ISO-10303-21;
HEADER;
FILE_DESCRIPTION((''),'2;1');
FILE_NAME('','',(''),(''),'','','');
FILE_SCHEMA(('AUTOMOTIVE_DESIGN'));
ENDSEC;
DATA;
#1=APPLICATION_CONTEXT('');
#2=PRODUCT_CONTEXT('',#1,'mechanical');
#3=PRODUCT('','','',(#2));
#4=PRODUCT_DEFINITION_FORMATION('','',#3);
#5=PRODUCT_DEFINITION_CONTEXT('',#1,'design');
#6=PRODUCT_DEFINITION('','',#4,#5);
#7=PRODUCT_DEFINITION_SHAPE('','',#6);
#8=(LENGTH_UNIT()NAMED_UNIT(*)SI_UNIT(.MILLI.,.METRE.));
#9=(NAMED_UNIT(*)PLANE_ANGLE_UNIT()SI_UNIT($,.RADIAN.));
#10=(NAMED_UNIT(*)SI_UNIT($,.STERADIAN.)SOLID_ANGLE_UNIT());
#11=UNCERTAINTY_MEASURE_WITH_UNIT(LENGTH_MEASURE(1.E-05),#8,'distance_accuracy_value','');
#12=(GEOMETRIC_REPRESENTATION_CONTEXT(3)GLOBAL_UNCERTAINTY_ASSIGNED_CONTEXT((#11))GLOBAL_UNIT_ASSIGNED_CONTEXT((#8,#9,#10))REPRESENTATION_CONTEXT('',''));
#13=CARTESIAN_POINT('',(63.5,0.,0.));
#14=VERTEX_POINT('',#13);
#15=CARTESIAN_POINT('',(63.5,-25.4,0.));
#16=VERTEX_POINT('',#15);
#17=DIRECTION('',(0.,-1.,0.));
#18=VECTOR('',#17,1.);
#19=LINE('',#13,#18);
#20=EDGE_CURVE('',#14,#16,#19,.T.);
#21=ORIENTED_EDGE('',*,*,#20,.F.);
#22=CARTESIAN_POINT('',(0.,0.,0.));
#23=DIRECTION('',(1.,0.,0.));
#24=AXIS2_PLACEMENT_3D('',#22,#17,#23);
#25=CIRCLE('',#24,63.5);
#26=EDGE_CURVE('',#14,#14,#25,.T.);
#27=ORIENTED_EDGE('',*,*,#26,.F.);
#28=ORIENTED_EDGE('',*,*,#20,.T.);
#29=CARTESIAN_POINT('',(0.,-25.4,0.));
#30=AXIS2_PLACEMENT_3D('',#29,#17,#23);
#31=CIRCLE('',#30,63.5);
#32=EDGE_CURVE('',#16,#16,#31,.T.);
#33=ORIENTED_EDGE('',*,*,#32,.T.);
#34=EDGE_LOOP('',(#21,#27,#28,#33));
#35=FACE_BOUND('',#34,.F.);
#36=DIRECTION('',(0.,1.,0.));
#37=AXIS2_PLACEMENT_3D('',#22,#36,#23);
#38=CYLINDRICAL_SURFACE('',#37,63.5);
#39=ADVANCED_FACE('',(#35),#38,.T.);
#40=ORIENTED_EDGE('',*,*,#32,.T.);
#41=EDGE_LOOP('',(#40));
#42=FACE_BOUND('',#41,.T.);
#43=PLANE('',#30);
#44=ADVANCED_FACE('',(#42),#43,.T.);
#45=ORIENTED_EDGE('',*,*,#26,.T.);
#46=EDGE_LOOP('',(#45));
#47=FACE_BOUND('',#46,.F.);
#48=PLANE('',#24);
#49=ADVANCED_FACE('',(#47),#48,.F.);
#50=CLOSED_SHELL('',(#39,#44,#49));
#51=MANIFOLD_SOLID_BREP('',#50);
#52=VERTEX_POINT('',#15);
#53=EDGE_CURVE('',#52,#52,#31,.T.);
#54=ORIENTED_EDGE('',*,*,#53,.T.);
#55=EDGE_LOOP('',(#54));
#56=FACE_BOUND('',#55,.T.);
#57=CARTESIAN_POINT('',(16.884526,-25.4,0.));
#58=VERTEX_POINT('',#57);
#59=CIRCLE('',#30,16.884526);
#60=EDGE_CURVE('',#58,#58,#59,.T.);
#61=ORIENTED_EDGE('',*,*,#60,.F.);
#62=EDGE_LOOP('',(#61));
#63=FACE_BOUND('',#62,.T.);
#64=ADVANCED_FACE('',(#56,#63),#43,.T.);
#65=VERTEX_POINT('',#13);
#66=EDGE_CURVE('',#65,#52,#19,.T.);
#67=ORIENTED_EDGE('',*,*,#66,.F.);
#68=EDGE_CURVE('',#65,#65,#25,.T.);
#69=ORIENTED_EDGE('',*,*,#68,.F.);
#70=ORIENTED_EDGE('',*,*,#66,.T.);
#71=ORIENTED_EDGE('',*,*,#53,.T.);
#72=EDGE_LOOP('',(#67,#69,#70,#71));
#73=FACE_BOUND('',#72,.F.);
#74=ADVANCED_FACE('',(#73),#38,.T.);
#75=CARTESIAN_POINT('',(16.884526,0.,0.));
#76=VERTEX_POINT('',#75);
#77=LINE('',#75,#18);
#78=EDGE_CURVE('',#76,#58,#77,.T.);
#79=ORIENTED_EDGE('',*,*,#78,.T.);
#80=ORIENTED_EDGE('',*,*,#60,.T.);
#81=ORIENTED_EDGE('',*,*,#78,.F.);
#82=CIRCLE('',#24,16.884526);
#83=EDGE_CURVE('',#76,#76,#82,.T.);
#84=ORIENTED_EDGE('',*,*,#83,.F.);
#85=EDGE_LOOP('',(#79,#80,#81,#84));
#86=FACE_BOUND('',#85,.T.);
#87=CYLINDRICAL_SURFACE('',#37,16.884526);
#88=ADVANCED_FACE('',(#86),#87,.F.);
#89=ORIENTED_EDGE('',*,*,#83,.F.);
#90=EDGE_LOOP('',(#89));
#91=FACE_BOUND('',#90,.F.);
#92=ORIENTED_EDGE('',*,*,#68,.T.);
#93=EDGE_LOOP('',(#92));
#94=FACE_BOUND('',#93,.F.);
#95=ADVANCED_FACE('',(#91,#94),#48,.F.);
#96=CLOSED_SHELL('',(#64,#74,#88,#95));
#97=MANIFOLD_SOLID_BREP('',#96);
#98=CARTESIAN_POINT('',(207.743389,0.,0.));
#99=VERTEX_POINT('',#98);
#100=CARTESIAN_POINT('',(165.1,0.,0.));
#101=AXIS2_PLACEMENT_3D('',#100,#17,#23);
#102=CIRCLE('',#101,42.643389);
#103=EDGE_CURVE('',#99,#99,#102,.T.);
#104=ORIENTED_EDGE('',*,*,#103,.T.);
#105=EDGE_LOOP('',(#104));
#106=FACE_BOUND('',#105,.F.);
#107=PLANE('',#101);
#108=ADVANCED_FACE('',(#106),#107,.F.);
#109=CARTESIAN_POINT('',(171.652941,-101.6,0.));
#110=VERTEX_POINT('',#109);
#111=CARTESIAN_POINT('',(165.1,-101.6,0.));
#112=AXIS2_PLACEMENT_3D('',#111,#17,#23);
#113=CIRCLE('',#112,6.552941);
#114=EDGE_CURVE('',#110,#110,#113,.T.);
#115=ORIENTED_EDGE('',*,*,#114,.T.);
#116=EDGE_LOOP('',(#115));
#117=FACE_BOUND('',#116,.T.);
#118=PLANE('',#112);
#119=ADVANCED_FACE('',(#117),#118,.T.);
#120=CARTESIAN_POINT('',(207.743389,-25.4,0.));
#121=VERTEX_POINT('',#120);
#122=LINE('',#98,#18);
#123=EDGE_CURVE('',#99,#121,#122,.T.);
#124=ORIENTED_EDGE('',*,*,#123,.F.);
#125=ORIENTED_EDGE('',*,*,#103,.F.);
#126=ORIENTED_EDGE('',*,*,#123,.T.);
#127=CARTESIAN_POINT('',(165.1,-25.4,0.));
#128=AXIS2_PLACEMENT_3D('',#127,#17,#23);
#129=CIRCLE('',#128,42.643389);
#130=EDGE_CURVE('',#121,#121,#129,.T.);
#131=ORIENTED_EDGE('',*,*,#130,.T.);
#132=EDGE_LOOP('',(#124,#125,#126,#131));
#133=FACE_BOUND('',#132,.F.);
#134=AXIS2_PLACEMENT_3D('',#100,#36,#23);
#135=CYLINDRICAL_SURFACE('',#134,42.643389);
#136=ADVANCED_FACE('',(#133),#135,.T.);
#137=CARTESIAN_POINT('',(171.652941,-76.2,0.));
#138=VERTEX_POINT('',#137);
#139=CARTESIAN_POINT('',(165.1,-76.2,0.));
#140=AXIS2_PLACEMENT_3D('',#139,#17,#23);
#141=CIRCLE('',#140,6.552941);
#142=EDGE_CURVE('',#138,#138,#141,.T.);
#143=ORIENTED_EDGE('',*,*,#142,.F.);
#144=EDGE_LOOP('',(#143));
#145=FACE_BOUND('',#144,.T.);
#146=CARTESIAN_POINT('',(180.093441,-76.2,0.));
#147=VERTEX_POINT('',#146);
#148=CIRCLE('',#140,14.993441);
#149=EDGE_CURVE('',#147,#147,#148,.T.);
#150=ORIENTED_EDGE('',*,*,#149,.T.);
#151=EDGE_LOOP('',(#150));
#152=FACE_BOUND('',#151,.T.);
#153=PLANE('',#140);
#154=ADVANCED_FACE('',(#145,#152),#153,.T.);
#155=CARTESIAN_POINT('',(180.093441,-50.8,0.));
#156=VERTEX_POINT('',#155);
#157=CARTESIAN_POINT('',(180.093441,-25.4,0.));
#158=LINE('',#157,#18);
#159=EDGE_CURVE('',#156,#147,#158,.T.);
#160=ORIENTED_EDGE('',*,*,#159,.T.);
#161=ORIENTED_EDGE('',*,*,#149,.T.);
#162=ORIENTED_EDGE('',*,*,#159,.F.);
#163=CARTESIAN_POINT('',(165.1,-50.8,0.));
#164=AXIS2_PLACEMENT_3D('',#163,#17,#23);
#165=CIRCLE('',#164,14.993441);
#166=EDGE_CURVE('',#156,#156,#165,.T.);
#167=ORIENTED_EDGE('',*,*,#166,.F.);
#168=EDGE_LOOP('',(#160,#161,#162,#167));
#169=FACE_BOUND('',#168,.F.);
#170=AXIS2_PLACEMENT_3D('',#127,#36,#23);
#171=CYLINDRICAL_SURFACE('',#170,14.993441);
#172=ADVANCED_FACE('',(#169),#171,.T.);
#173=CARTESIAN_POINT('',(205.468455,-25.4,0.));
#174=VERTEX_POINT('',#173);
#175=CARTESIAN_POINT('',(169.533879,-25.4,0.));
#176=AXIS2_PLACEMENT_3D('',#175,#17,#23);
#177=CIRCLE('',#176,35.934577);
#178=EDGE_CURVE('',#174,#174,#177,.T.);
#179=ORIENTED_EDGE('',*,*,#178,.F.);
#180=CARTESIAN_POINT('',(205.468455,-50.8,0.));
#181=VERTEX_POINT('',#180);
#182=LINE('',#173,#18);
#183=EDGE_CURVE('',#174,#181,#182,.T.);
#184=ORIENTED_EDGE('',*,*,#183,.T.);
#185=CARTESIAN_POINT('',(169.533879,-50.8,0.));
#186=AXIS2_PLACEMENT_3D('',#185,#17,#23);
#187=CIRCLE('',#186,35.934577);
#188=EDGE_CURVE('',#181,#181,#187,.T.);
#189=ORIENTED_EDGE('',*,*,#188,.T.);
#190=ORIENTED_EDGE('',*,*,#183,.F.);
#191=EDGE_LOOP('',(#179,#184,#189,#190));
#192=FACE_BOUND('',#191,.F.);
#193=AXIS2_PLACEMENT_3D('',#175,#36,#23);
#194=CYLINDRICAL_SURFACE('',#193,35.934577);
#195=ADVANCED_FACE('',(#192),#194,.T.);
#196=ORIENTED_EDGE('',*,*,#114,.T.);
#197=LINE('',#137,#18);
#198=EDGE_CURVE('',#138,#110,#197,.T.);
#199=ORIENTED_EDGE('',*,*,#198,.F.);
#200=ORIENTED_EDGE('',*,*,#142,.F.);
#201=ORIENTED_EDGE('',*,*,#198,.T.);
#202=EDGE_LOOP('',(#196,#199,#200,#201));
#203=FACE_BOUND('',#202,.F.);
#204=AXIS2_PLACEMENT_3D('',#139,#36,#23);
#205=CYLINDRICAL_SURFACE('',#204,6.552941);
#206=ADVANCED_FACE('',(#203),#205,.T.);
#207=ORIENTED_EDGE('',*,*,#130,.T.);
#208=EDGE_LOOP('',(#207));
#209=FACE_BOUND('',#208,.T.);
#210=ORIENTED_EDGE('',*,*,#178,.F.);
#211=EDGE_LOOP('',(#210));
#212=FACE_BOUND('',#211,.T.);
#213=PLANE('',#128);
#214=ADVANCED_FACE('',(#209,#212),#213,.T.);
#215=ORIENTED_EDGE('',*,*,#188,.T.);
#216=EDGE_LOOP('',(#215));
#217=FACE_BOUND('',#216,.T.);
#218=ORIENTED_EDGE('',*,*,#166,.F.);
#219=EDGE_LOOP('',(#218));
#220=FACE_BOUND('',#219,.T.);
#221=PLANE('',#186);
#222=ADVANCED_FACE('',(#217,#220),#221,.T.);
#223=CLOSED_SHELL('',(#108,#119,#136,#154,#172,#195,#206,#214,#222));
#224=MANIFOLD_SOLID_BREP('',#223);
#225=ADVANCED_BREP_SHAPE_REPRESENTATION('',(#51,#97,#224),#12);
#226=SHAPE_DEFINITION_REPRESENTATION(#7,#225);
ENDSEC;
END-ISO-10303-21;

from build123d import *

# Parameters (mm, degrees)
F0_R     = 42.6433885457
F2_DEPTH = 25.4
F0_R_2   = 63.5
F1_R     = 63.5
F1_R_2   = 16.8845262582
F3_R     = 35.9345767258
F3_R_2   = 14.9934405288
F4_DEPTH = 25.4
F5_DEPTH = 50.8
F6_R     = 6.5529414014
F7_DEPTH = 25.4


with BuildPart() as f2:
    # F0 (on Front) → F2 (new body)
    with BuildSketch(Plane.XZ):
        with Locations((165.1, 0)):
            Circle(F0_R)
    extrude(amount=F2_DEPTH)

    # F3 (on face) → F4 (join)
    with BuildSketch(Plane.XZ.offset(25.4)):
        with Locations((169.5338785648, 0)):
            Circle(F3_R)
        with Locations((165.1, 0)):
            Circle(F3_R_2, mode=Mode.SUBTRACT)
    extrude(amount=F4_DEPTH)

    # F5 (add): a face of the model
    f5_faces = [f2.faces().sort_by_distance(p)[0] for p in [
        (165.1, -25.4, 0),
    ]]
    extrude(f5_faces, amount=F5_DEPTH)

    # F6 (on face) → F7 (join)
    with BuildSketch(Plane.XZ.offset(76.2)):
        with Locations((165.1, 0)):
            Circle(F6_R)
    extrude(amount=F7_DEPTH)


with BuildPart() as f2b:
    # F0 (on Front) → F2, piece 2 (new body)
    with BuildSketch(Plane.XZ):
        Circle(F0_R_2)
    extrude(amount=F2_DEPTH)


with BuildPart() as f2c:
    # F1 (on face) → F2, piece 3 (new body)
    with BuildSketch(Plane.XZ):
        Circle(F1_R)
        Circle(F1_R_2, mode=Mode.SUBTRACT)
    extrude(amount=F2_DEPTH)


solid = Compound([f2.part, f2b.part, f2c.part])
